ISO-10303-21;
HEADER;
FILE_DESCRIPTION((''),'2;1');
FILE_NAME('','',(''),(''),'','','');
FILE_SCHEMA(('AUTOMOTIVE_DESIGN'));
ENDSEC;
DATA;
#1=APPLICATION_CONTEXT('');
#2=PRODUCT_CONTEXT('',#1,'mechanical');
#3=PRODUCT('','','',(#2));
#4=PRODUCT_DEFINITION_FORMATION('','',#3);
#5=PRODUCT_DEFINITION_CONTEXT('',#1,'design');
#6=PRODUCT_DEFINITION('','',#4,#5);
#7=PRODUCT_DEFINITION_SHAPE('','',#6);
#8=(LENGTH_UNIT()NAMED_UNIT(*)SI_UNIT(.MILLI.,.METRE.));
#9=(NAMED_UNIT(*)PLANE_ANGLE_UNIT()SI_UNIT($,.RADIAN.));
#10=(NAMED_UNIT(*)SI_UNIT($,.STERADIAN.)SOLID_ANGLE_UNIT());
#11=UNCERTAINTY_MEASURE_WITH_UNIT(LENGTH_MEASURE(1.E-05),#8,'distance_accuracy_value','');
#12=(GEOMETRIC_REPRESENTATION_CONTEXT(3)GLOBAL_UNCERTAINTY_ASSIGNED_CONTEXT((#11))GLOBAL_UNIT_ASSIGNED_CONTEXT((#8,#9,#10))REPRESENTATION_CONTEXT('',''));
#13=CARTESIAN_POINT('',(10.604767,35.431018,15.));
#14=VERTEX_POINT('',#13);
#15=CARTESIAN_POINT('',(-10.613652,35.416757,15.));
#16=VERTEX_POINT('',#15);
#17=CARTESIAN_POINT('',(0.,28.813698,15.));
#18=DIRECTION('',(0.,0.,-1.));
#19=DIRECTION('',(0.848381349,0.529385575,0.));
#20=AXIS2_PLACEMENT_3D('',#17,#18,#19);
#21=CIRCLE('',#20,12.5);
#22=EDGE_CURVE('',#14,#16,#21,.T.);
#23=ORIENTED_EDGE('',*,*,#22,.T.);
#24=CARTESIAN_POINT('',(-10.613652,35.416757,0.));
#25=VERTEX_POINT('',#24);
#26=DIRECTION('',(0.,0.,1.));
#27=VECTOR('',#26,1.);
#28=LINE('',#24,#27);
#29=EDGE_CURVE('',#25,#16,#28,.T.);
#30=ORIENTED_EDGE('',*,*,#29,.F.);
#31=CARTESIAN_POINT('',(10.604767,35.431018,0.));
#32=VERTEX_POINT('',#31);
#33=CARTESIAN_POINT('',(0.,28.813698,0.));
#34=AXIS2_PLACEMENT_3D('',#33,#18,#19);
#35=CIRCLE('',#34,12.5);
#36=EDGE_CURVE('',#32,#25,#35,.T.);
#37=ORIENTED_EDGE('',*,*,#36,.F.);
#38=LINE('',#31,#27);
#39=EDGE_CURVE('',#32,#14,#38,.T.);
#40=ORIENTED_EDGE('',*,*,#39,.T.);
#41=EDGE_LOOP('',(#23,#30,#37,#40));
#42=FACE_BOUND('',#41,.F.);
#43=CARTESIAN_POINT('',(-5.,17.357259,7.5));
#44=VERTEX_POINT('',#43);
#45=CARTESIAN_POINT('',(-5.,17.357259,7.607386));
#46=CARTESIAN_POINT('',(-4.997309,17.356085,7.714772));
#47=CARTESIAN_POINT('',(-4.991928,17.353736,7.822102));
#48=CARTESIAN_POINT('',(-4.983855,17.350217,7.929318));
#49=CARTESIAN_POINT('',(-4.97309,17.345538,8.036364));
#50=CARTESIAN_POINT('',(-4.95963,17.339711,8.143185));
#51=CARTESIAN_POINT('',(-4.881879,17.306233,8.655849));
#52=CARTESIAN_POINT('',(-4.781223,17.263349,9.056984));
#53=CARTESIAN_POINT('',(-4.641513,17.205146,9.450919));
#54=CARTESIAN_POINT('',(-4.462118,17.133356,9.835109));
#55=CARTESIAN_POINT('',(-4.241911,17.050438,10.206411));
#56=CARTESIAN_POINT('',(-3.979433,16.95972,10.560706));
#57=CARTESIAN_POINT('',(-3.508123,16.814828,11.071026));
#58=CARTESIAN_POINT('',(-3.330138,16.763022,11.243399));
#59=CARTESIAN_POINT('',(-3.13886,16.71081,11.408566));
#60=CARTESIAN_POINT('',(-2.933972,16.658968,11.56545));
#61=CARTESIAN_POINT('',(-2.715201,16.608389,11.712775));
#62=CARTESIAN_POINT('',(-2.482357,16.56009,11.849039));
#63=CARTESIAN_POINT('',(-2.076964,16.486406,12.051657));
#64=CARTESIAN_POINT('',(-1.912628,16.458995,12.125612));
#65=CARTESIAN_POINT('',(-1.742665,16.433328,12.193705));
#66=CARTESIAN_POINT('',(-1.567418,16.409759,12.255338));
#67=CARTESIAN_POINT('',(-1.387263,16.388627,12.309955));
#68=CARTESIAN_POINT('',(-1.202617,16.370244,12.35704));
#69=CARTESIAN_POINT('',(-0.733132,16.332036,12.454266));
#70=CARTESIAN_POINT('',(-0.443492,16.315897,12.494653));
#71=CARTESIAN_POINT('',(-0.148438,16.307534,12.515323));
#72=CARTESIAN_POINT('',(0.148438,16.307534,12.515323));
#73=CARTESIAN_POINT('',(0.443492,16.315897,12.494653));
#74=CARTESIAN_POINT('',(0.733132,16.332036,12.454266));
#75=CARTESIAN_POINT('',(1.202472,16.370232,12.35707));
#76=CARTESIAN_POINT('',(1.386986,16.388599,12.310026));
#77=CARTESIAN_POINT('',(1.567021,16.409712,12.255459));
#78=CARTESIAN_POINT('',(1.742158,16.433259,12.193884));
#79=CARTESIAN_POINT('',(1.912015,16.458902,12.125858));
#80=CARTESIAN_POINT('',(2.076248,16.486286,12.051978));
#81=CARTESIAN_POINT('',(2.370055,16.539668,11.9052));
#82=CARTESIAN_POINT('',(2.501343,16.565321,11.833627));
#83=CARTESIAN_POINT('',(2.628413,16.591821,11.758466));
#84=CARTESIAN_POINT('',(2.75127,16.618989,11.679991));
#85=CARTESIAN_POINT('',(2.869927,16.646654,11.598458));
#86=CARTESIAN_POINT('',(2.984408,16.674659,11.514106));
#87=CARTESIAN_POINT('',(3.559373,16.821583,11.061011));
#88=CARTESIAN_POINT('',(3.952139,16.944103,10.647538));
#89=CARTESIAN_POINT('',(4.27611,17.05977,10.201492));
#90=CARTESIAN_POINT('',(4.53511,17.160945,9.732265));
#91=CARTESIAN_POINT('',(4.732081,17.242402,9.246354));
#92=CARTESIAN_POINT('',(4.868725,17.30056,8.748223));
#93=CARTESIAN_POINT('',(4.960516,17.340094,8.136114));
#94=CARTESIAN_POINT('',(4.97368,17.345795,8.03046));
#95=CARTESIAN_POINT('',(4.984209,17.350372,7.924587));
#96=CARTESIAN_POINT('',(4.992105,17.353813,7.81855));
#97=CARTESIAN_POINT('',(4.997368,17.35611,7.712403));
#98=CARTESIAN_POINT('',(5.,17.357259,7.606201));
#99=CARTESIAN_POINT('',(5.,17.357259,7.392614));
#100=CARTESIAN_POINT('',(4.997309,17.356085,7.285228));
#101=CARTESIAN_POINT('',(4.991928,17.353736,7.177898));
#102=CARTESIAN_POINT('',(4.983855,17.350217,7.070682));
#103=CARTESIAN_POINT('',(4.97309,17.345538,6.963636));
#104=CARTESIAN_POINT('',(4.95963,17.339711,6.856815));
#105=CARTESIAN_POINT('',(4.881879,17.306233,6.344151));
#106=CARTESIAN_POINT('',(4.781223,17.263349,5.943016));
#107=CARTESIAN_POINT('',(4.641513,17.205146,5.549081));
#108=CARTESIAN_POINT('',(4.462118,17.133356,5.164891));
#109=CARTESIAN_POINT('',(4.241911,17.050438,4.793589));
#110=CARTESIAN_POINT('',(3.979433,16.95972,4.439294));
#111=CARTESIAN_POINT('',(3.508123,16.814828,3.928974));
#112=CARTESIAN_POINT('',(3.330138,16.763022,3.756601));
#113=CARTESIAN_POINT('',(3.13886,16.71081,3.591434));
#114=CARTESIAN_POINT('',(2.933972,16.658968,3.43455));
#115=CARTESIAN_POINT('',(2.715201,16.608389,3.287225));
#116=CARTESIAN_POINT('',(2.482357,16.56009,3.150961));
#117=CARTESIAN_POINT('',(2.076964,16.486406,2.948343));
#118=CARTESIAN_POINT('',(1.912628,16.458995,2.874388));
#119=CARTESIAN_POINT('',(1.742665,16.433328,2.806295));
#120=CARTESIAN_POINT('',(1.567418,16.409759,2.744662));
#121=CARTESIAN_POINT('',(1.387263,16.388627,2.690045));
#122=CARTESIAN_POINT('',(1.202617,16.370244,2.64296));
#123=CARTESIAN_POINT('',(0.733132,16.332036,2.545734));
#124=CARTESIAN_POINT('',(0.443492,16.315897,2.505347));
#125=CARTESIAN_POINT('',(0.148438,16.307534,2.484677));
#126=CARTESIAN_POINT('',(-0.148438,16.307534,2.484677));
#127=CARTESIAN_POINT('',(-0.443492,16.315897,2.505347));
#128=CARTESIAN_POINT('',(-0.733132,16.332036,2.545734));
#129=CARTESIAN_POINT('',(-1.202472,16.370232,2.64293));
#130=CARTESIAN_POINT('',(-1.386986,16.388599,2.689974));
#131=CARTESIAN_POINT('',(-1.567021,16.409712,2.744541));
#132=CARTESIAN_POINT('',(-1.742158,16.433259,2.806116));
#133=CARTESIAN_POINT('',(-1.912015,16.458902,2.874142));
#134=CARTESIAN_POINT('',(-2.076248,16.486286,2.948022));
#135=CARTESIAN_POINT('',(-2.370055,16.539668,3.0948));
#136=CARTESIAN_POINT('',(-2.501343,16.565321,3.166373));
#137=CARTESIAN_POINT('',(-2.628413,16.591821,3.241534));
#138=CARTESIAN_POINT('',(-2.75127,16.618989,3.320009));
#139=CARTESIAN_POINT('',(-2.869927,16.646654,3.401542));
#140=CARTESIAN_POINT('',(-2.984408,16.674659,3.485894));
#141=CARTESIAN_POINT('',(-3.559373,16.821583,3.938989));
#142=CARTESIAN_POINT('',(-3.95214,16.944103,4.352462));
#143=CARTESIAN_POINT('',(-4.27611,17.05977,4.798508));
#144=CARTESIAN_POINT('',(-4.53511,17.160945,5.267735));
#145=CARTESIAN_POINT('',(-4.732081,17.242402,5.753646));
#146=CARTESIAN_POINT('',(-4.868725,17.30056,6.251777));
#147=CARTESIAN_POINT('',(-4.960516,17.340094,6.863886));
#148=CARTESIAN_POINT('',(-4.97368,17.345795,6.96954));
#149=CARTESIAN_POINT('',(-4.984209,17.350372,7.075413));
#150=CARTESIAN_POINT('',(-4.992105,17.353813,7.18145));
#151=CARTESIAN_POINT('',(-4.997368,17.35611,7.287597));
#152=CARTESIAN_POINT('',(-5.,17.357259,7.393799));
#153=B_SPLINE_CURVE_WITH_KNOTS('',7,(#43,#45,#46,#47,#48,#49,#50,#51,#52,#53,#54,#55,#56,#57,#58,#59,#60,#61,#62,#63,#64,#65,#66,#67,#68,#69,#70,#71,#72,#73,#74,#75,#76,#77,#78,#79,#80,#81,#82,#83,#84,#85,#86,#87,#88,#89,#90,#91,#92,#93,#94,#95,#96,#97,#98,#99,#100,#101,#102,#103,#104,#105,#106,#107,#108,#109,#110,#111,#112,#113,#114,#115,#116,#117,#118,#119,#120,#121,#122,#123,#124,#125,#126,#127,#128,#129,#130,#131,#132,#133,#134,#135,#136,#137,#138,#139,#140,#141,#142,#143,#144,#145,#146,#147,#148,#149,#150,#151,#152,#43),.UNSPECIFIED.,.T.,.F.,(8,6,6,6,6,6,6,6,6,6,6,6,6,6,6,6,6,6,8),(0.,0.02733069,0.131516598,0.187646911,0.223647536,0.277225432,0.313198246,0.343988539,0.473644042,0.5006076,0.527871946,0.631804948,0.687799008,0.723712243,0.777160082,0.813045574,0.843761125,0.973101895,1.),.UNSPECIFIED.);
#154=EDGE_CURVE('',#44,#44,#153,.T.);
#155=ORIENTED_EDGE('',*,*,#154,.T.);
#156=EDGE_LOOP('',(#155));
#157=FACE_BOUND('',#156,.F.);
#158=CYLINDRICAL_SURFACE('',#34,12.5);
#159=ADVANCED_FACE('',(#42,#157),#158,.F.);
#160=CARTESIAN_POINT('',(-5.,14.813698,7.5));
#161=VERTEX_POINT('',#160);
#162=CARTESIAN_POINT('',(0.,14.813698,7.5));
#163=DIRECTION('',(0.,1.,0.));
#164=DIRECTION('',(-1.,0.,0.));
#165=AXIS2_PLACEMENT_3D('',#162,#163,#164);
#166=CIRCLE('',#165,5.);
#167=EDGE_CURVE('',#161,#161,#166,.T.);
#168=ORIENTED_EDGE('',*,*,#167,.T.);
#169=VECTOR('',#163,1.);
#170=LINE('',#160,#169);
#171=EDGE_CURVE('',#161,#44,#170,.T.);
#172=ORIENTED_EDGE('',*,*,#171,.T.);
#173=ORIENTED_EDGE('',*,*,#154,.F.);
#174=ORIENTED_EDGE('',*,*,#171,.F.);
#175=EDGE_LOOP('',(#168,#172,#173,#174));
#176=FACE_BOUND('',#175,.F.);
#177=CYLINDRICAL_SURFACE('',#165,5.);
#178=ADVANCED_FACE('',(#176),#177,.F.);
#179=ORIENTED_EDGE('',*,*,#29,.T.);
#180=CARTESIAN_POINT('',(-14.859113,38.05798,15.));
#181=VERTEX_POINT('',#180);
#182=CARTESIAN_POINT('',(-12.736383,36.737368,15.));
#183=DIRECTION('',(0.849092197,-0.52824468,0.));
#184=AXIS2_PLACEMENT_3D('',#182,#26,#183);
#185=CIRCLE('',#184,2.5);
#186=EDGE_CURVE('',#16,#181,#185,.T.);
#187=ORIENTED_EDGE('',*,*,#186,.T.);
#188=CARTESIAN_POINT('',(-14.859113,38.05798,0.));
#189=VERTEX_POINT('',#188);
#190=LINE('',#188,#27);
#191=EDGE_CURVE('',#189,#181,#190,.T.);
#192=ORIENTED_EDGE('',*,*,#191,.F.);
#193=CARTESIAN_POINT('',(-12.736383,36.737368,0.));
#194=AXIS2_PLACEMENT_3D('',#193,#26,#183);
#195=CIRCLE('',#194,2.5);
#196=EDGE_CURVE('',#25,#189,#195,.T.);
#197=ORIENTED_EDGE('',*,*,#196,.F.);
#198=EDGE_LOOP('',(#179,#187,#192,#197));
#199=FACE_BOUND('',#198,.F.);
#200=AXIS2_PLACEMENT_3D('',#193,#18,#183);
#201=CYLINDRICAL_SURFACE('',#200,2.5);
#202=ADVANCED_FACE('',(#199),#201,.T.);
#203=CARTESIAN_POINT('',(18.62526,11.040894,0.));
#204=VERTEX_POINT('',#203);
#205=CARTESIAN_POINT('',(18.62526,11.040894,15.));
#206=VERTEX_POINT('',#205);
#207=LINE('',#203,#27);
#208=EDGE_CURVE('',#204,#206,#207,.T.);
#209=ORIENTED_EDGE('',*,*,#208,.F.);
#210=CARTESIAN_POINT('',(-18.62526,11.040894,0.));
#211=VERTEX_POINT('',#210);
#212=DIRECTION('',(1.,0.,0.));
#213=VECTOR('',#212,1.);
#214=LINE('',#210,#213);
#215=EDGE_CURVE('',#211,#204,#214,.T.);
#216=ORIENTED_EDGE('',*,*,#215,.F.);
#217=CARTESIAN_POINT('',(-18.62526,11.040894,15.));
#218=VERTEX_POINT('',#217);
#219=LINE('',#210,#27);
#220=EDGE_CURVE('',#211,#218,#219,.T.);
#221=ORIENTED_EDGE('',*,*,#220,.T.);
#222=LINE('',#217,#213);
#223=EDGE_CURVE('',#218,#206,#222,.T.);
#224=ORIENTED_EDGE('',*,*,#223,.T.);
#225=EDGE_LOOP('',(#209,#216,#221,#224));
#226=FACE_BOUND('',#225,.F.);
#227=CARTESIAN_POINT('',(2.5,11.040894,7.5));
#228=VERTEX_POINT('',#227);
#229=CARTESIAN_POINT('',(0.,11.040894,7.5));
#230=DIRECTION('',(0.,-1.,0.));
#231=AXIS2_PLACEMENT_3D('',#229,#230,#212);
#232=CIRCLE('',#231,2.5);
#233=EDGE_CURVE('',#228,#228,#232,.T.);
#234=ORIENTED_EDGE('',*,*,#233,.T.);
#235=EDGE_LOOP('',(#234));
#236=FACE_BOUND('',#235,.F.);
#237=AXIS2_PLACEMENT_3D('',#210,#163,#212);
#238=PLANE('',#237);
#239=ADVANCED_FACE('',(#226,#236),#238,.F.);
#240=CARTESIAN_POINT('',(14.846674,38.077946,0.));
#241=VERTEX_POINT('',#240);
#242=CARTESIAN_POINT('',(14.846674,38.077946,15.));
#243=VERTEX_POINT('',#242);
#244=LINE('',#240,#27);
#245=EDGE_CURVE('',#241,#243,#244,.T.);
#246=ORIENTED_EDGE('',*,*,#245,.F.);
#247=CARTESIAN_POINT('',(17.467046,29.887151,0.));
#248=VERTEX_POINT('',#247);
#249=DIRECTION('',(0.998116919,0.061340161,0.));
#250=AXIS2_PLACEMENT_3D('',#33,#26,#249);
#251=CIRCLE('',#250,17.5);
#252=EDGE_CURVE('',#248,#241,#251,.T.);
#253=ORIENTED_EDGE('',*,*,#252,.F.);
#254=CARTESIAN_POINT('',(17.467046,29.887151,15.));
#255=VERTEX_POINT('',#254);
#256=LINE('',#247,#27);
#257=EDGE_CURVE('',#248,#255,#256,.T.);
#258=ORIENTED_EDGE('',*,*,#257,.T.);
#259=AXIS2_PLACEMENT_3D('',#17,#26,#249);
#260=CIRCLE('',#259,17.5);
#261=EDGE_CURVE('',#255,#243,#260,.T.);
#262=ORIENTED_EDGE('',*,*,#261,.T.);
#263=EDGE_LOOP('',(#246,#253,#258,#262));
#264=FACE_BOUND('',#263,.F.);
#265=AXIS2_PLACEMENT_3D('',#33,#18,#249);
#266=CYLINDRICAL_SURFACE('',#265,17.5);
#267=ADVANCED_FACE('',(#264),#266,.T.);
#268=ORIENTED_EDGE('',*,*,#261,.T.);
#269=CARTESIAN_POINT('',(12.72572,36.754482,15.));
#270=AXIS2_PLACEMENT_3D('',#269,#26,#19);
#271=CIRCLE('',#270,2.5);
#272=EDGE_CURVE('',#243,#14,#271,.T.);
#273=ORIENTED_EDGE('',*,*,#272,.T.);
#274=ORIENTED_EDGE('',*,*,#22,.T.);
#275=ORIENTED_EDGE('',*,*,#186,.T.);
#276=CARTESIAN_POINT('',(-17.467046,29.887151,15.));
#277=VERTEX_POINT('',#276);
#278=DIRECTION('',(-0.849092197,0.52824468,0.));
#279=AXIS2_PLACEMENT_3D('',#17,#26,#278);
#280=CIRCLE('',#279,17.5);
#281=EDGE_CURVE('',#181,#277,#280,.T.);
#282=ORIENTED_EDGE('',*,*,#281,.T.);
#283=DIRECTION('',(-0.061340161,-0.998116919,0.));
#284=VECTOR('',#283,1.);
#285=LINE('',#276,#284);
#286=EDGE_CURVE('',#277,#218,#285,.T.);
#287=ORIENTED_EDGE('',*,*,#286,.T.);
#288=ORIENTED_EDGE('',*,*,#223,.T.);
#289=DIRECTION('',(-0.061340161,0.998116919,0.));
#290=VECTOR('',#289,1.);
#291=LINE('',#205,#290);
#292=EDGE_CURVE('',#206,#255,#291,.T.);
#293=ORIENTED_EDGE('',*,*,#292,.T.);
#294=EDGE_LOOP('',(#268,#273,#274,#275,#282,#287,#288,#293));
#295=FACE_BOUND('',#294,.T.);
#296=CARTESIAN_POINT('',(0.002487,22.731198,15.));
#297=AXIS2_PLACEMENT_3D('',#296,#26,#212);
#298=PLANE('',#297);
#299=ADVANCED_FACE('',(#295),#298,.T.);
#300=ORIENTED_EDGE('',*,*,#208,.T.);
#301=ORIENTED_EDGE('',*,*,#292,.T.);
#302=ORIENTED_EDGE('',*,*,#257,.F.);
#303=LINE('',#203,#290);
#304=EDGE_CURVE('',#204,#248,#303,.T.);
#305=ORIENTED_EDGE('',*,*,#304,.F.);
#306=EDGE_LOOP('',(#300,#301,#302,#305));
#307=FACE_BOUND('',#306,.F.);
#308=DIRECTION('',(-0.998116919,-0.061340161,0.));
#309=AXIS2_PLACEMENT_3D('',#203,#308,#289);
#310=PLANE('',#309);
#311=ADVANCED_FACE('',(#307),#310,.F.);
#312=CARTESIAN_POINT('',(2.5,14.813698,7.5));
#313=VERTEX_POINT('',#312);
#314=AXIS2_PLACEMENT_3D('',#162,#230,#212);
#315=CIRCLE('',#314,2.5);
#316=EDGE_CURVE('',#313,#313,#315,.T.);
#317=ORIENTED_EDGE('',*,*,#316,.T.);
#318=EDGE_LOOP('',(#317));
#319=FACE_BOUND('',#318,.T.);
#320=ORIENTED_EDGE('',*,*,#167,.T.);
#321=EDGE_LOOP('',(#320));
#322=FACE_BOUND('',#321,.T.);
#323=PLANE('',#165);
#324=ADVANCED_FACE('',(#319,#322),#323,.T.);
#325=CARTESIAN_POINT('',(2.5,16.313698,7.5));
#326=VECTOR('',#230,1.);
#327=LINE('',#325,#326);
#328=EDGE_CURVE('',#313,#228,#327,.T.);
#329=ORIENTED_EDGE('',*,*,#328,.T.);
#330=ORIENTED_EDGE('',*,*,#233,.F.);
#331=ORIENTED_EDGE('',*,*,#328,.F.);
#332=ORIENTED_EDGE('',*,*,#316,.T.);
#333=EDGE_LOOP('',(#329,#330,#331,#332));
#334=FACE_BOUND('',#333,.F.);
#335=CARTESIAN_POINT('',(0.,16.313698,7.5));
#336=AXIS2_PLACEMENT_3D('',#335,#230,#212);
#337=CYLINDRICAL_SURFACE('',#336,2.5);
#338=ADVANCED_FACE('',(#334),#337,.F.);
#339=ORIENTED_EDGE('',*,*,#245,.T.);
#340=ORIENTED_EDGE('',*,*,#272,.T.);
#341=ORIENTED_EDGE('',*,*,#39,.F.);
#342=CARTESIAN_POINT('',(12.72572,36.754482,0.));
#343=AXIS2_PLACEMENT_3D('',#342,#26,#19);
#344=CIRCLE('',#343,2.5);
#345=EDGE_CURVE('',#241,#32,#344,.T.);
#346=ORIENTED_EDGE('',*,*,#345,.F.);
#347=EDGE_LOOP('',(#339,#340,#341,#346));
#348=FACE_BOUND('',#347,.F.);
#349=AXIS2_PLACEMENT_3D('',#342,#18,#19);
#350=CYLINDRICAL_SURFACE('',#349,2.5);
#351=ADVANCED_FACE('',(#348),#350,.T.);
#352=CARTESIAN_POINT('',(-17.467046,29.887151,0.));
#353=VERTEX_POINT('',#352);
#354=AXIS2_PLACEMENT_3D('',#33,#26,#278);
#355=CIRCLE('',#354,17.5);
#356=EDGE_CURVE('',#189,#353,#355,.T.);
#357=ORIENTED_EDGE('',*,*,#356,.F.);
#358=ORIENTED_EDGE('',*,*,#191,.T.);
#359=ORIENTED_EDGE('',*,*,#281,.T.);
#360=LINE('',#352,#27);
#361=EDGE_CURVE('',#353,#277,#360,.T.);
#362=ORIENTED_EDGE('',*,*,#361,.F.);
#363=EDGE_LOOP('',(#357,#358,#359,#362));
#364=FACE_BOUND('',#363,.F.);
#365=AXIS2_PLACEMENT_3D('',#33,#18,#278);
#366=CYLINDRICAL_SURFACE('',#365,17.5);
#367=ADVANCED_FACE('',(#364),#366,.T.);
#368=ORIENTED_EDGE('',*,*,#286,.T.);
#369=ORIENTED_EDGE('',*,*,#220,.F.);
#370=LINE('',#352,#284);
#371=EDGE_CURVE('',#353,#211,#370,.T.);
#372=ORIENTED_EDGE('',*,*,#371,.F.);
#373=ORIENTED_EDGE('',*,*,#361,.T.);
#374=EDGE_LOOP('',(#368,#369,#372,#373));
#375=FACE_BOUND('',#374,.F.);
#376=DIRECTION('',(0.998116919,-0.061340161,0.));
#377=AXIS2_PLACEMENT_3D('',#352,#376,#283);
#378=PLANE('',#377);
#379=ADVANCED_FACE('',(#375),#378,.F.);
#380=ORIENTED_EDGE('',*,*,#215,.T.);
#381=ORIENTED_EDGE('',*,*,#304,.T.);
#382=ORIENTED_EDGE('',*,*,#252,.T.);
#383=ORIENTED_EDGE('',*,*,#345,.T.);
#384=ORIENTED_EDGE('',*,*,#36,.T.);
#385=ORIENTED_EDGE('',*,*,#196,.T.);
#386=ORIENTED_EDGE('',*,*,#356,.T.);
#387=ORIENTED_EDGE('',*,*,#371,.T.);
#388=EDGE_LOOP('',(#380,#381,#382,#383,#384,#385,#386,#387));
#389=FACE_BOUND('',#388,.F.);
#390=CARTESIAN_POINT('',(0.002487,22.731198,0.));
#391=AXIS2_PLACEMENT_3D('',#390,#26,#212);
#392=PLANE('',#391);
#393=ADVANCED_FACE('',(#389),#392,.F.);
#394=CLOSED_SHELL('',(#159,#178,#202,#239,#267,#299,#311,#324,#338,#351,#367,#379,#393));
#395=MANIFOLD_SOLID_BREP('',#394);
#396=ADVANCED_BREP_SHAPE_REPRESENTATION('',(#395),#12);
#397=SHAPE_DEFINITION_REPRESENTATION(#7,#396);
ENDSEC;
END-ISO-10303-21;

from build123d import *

# Parameters (mm, degrees)
F1_DEPTH       = 15
F4_D           = 5
F4_START       = 12.5000001
F4_CBORE_D     = 10
F4_CBORE_DEPTH = 1.5


# Not quite as in the source:
# - a feature of the source that left no trace in its solid (it failed there, or was rolled back) is left out


with BuildPart() as f1:
    # F0 (on Top) → F1 (new body)
    with BuildSketch(Plane.XY):
        with BuildLine():
            ThreePointArc((10.6047668571, 35.4310178135), (0.0084014235, 16.3137009448), (-10.6136524588, 35.4167566161))
            ThreePointArc((-10.6136524588, 35.4167566161), (-11.4157712516, 38.8600988068), (-14.8591134423, 38.057980014))
            ThreePointArc((-14.8591134423, 38.057980014), (-16.6714054435, 34.1348108377), (-17.4670460885, 29.8871509353))
            Line((-17.4670460885, 29.8871509353), (-18.6252595091, 11.0408943146))
            Line((-18.6252595091, 11.0408943146), (18.6252595091, 11.0408943146))
            Line((18.6252595091, 11.0408943146), (17.4670460885, 29.8871509353))
            ThreePointArc((17.4670460885, 29.8871509353), (16.6678252842, 34.1460147189), (14.8466735999, 38.0779456904))
            ThreePointArc((14.8466735999, 38.0779456904), (11.4022562901, 38.8754351234), (10.6047668571, 35.4310178135))
        make_face()
    extrude(amount=F1_DEPTH)

    # F4 (through all)
    # its depths count from where the whole tool has entered the part; down to there all is cleared
    with Locations(Plane(origin=(0, 28.8136981214, 0), x_dir=(-1, 0, 0), z_dir=(0, 1, 0)).offset(-F4_START)):
        with Locations((0, 7.5)):
            CounterBoreHole(F4_D / 2, F4_CBORE_D / 2, F4_CBORE_DEPTH)


solid = f1.part
